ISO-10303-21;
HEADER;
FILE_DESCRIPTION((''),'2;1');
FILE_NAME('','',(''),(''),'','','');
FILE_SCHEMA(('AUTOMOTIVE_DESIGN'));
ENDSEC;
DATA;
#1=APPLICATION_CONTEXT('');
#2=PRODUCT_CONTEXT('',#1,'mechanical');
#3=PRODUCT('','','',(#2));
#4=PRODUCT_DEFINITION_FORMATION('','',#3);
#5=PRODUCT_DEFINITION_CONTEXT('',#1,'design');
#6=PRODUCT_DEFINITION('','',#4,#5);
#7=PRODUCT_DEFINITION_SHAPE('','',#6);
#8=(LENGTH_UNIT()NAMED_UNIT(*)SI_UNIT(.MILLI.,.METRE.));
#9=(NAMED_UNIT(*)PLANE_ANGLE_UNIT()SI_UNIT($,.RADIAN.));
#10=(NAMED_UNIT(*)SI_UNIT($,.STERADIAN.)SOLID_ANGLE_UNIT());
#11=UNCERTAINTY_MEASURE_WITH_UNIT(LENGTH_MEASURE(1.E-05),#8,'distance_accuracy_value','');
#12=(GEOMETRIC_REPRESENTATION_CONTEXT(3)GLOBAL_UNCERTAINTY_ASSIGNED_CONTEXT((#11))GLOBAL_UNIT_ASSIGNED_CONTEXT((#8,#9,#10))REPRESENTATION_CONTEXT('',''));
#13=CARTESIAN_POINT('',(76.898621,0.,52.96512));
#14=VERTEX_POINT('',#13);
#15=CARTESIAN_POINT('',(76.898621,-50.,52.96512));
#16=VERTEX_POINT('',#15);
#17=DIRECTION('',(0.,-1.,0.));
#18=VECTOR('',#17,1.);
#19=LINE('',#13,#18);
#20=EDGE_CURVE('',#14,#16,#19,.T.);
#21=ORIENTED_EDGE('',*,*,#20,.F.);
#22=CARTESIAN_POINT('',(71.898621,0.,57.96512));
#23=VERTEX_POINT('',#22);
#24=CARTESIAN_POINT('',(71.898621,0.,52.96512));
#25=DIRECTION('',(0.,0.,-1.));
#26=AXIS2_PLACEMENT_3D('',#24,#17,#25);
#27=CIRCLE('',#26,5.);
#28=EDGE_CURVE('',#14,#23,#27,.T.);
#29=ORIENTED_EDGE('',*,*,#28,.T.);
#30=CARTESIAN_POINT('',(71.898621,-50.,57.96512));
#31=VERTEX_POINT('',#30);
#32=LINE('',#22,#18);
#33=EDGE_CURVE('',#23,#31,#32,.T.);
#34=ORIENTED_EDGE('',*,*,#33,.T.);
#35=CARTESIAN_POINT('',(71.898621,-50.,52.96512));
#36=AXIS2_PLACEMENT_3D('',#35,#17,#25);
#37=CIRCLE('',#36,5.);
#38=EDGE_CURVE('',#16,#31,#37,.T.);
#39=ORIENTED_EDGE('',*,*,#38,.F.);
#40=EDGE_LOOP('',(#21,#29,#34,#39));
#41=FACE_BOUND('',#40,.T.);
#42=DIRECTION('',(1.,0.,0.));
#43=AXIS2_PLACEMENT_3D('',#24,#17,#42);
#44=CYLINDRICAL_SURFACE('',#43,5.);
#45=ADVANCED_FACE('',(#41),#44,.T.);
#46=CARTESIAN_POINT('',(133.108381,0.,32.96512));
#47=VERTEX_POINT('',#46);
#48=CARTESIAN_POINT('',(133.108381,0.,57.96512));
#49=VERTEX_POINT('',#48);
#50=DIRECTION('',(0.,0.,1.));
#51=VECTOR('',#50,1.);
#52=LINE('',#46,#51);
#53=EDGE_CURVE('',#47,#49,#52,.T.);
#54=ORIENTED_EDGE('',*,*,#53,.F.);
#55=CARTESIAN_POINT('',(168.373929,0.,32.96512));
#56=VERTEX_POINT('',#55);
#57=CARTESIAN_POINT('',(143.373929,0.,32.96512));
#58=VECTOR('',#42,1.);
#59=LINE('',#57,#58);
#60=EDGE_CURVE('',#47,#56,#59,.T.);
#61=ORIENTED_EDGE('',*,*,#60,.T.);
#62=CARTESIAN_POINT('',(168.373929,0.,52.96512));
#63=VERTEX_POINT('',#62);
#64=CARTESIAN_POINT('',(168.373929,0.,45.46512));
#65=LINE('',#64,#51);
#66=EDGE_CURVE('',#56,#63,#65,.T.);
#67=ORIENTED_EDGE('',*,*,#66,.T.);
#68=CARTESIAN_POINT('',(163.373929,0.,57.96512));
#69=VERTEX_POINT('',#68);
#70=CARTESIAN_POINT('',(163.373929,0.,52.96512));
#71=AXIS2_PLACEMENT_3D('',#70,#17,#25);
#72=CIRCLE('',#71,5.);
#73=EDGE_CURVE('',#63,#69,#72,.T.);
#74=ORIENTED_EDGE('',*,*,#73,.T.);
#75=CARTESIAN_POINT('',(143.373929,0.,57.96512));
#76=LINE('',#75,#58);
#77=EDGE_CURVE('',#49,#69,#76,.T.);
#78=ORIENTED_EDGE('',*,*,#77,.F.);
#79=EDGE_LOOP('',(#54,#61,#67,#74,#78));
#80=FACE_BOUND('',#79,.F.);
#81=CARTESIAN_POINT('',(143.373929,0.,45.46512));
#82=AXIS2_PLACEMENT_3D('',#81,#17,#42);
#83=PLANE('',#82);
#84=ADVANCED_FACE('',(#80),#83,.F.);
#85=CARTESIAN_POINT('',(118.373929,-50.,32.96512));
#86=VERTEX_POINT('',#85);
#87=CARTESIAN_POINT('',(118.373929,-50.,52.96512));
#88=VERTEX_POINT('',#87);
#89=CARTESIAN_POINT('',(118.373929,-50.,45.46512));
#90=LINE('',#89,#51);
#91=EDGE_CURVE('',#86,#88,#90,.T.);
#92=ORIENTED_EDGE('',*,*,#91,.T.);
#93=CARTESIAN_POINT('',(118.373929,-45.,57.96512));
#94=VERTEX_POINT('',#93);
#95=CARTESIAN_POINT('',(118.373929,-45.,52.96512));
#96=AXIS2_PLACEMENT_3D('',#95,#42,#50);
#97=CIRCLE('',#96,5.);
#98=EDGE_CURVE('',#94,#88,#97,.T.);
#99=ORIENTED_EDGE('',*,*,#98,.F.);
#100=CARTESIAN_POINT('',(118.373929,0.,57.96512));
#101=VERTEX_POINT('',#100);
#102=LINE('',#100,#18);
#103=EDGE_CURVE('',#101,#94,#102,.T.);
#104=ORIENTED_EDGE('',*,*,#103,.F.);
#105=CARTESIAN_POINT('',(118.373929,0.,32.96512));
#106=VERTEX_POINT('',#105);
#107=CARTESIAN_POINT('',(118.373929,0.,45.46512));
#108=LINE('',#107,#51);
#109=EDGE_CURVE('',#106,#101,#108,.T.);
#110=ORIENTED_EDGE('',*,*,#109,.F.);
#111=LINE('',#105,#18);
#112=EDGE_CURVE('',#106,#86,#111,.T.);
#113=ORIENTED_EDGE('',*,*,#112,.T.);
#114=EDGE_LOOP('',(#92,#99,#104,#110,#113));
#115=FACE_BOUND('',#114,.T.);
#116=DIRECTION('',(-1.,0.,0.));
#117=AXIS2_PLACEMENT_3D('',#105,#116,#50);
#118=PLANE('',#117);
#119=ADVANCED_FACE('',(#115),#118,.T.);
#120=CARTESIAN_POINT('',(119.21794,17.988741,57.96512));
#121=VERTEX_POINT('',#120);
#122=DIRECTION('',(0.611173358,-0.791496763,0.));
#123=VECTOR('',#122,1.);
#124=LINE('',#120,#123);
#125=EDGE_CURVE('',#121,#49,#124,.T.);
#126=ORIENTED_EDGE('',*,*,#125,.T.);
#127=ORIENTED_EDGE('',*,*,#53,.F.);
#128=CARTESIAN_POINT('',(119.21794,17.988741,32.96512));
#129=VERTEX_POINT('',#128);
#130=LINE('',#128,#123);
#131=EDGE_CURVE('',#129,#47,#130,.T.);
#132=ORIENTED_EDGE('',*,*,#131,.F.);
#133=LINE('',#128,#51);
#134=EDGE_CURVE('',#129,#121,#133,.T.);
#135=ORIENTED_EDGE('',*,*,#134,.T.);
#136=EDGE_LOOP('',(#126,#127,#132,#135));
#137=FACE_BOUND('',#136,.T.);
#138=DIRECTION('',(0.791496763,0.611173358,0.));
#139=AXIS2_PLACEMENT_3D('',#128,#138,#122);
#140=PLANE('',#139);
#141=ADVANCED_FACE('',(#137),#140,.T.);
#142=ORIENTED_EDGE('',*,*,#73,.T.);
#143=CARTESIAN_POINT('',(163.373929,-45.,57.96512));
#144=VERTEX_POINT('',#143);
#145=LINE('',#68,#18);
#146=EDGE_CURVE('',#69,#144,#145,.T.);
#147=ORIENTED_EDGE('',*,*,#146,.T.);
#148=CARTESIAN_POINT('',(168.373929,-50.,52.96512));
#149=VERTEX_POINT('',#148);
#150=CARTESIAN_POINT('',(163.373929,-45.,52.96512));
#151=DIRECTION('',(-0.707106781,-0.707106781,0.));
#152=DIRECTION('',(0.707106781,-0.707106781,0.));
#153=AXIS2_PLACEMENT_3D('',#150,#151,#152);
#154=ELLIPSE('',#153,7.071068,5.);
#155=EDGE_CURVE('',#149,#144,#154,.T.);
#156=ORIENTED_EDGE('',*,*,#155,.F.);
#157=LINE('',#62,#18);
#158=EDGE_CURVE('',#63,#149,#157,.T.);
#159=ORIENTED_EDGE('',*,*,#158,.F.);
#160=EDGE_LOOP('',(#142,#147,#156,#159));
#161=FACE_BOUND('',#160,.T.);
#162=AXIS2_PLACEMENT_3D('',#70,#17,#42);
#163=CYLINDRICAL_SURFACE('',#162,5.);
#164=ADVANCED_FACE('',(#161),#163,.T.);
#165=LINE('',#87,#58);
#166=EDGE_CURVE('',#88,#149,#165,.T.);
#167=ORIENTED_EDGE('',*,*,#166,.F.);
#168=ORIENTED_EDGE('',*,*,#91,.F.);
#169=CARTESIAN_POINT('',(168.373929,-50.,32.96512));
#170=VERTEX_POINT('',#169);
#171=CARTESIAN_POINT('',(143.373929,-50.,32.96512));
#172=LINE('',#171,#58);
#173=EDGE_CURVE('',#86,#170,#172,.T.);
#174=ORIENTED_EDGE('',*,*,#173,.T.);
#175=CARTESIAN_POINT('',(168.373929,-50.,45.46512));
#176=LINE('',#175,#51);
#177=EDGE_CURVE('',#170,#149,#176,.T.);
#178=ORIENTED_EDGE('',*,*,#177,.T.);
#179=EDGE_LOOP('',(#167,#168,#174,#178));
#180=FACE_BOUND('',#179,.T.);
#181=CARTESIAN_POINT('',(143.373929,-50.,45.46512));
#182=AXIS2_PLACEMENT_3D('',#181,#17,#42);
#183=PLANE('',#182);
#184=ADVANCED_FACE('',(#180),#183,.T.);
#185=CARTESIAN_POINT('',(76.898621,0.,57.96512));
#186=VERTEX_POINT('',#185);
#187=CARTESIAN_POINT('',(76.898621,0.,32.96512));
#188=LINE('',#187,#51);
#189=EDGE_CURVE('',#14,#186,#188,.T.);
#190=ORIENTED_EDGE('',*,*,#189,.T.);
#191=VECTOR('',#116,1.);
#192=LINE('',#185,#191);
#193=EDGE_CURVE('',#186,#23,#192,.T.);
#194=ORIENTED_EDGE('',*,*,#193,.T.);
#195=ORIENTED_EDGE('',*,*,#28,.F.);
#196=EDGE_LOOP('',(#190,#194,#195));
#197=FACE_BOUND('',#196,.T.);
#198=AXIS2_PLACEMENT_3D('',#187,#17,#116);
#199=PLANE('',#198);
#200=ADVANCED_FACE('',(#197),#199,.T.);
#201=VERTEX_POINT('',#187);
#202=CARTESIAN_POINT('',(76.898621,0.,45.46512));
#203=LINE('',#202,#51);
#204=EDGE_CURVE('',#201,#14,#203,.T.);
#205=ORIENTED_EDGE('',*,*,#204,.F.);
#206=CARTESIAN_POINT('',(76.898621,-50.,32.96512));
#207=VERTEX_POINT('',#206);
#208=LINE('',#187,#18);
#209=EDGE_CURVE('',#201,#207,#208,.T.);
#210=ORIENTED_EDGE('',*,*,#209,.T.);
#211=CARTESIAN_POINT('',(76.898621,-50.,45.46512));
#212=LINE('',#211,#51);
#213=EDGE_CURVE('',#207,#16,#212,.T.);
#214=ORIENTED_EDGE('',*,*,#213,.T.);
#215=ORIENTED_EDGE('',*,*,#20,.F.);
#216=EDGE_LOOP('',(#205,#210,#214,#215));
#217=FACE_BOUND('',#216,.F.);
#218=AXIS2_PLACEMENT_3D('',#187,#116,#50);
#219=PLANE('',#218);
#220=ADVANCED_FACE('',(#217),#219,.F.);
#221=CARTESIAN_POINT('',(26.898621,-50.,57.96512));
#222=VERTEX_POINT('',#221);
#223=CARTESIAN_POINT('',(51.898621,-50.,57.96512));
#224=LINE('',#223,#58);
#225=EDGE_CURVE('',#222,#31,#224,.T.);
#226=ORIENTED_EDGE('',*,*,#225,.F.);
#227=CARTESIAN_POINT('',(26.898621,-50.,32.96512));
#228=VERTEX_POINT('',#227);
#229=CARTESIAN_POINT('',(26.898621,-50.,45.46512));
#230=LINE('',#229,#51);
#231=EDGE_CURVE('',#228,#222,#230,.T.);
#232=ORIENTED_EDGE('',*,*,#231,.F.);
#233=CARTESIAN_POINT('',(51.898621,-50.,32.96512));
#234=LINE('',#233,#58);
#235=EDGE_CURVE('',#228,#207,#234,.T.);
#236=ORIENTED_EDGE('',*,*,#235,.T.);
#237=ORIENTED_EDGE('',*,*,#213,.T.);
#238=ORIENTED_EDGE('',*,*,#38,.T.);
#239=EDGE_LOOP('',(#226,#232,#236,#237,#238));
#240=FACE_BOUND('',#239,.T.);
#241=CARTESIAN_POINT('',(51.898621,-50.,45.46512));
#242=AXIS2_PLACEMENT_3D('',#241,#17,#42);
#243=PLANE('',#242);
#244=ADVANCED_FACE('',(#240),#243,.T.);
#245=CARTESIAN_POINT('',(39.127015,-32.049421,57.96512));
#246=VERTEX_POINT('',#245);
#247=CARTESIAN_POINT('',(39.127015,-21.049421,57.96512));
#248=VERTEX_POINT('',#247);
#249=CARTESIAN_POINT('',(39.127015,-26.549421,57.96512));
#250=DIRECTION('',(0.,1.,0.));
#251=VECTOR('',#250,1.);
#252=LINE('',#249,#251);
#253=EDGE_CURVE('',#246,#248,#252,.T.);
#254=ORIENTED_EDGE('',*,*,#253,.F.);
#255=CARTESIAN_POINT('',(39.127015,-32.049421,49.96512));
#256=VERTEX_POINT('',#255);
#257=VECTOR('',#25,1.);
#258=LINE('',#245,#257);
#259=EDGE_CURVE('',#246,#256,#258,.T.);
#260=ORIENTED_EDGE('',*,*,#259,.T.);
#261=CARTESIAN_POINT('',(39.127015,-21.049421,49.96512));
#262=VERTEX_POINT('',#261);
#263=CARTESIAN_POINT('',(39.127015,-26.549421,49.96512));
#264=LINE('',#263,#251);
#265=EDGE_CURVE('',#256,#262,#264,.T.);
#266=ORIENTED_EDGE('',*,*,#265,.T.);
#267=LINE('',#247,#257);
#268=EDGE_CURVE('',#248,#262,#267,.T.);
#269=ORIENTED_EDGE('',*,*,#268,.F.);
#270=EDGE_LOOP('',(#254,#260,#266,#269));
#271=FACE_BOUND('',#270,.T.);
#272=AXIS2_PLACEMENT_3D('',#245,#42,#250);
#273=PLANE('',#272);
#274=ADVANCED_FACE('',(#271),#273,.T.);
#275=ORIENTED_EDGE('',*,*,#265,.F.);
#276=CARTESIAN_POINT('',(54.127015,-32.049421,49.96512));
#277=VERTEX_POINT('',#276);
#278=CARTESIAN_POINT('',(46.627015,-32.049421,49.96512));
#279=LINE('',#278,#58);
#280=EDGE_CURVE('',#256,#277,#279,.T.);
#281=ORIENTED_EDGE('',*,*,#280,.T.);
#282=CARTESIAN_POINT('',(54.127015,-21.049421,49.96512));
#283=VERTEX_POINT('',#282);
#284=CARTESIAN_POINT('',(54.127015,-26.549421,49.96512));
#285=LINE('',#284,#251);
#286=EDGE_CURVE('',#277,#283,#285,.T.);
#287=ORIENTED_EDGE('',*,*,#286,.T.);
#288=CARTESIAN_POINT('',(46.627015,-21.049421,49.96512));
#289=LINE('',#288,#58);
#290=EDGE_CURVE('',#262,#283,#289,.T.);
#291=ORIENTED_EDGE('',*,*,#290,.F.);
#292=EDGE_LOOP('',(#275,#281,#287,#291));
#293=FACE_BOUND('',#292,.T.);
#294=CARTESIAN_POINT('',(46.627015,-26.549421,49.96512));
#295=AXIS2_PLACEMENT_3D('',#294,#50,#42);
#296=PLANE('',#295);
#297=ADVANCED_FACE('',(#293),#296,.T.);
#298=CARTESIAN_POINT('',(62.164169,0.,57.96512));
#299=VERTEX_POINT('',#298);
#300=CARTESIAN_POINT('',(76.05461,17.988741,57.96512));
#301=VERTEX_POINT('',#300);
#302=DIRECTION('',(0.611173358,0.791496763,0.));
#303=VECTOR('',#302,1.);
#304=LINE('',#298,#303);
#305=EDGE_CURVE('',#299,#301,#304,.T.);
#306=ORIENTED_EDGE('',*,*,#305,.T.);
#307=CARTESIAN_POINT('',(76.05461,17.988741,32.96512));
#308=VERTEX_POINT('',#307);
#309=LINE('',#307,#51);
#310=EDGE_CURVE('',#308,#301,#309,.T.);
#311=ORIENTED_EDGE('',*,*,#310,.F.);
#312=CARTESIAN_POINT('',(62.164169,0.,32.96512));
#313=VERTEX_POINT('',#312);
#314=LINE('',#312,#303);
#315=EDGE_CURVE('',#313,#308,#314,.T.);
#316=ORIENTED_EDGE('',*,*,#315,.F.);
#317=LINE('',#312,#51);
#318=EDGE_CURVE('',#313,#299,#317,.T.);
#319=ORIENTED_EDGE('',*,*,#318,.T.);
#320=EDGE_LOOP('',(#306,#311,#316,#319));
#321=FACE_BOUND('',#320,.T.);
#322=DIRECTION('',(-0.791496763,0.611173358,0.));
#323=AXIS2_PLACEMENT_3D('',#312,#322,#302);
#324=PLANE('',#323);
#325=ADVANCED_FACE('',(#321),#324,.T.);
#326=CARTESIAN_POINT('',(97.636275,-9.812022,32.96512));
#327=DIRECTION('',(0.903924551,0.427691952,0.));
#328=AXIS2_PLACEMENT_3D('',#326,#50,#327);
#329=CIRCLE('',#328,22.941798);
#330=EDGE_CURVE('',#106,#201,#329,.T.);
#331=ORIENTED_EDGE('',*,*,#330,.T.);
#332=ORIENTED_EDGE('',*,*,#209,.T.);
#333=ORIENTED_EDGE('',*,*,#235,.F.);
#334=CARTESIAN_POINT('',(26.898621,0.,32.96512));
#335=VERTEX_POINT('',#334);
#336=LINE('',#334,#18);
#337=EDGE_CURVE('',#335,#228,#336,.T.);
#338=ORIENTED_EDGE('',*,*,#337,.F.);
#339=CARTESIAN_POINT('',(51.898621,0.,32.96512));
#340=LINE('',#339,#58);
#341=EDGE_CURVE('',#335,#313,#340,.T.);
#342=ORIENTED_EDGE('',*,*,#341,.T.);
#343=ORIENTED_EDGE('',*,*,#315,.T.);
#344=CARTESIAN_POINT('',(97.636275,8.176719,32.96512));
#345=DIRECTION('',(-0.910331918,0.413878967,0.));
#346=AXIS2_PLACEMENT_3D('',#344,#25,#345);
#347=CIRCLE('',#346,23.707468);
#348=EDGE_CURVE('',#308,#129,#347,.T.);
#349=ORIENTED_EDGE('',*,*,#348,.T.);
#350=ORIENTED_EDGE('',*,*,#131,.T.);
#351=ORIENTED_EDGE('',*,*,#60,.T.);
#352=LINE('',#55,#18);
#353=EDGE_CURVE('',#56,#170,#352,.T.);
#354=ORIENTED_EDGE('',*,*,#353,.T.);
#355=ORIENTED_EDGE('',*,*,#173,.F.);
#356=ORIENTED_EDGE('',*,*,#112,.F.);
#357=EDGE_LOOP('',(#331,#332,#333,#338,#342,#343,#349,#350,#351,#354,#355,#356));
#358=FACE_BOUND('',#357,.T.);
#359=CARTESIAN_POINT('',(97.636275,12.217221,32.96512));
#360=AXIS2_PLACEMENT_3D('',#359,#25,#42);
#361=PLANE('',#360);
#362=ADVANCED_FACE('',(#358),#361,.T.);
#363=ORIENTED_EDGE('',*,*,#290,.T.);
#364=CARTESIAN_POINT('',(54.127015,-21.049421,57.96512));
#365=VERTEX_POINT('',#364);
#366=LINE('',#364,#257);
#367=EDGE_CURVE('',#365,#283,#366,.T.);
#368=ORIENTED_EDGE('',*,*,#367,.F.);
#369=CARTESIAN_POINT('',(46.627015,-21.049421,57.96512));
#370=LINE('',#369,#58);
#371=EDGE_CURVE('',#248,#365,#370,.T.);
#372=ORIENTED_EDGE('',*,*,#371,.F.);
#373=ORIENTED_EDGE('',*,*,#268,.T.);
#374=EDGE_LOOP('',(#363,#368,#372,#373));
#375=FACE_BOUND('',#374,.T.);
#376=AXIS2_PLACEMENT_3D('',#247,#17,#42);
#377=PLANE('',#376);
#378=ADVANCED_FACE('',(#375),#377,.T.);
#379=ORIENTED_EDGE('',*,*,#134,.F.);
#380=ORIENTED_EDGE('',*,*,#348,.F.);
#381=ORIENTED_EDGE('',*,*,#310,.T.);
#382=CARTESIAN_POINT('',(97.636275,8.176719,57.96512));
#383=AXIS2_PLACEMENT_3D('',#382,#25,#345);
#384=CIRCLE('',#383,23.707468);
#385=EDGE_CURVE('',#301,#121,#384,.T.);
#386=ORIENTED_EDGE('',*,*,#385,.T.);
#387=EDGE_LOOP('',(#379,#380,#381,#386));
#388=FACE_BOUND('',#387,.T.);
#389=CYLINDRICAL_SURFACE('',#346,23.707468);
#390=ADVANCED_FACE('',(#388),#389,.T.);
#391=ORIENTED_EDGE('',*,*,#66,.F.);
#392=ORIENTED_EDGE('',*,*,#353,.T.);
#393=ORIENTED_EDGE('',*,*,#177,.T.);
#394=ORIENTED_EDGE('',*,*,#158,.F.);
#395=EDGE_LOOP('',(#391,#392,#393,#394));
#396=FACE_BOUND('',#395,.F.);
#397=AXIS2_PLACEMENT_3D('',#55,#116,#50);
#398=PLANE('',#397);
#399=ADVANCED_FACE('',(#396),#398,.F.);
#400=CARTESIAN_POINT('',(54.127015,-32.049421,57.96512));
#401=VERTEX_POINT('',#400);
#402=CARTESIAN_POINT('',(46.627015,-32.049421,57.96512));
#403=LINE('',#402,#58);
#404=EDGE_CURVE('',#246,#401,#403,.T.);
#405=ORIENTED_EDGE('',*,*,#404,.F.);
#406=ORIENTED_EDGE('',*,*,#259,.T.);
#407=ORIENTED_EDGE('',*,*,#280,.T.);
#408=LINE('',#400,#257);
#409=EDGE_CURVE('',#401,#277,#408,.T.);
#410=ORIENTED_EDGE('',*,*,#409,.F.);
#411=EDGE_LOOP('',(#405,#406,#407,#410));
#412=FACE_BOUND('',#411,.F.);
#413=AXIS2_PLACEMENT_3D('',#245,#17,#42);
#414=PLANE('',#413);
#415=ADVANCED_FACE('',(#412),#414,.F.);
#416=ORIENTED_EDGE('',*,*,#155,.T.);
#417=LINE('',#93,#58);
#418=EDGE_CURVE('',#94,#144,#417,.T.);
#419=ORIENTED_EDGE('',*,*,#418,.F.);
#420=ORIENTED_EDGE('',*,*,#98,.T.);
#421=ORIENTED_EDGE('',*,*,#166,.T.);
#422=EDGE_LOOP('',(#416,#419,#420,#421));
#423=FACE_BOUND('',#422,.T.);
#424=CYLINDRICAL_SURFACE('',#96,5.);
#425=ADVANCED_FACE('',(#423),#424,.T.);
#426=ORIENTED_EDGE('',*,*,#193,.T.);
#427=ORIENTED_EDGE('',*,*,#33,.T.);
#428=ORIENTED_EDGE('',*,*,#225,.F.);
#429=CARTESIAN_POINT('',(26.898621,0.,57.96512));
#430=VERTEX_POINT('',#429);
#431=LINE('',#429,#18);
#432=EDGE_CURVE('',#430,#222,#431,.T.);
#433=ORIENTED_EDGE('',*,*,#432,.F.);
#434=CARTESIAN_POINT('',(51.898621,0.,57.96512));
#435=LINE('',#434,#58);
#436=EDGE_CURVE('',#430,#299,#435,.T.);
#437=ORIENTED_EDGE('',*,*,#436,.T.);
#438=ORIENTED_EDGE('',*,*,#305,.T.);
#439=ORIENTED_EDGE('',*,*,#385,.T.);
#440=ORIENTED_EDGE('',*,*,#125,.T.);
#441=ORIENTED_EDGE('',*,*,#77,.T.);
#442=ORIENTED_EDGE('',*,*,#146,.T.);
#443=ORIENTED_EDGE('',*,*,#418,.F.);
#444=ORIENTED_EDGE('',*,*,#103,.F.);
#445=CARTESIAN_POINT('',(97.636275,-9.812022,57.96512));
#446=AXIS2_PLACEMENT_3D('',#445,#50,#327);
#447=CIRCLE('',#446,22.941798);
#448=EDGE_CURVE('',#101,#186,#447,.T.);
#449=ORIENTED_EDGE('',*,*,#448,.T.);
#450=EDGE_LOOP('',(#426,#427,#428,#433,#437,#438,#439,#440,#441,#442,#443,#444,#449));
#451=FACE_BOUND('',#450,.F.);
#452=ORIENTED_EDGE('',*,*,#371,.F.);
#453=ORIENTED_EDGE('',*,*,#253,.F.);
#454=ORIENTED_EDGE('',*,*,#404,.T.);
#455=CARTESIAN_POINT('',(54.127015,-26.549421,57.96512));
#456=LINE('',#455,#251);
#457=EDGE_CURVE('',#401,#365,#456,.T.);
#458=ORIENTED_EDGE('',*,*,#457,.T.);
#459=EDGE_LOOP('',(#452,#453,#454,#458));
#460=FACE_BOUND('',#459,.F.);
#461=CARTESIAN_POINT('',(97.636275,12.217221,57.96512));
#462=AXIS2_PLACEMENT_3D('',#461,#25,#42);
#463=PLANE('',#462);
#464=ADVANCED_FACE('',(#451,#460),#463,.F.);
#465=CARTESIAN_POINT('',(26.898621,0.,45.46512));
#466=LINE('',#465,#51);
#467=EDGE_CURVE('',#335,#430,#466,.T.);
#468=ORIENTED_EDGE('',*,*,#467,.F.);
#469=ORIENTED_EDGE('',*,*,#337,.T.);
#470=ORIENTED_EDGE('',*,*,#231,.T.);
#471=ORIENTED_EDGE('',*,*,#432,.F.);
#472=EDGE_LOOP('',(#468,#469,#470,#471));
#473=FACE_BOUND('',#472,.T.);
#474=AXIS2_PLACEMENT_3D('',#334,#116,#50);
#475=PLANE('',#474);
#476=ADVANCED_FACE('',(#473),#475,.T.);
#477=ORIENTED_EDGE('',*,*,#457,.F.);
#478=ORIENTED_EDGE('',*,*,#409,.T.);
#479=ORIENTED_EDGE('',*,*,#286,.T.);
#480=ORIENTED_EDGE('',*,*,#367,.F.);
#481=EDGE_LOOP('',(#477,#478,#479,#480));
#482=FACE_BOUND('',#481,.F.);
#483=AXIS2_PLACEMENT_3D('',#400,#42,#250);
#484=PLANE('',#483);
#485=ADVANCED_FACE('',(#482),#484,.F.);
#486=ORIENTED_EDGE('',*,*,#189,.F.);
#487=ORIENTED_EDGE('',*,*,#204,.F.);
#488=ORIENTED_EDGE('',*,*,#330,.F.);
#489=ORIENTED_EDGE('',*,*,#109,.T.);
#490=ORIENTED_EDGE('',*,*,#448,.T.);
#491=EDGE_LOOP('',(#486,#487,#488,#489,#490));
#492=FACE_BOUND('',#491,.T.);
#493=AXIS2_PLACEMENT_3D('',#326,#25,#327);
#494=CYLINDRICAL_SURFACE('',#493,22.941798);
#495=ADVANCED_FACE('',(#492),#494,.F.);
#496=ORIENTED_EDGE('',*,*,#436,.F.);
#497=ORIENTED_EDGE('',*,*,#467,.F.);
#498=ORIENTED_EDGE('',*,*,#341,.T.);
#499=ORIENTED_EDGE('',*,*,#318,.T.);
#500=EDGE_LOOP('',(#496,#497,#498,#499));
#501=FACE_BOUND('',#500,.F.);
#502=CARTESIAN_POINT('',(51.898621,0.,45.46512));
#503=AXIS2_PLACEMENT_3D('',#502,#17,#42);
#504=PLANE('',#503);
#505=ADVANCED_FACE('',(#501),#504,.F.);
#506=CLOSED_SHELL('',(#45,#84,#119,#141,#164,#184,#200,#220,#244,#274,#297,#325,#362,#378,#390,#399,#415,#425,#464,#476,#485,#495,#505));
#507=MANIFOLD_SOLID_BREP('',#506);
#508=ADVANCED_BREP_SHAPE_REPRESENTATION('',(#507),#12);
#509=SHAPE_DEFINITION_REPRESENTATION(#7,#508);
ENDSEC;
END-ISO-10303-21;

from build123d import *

# Parameters (mm, degrees)
F0_W     = 50
F0_H     = 25
F1_DEPTH = 50
F2_R     = 5
F2_2_R   = 5
F3_W     = 15
F3_H     = 11
F3_R     = 5
F4_DEPTH = 8
F7_DEPTH = 25


with BuildPart() as f1:
    # F0 (on Front) → F1 (new body)
    with BuildSketch(Plane.XZ):
        with Locations((51.8986206502, 45.4651199281)):
            Rectangle(F0_W, F0_H)
    extrude(amount=F1_DEPTH)

    # F2
    f2_edges = [f1.edges().sort_by_distance(p)[0] for p in [
        (76.898621, -25, 57.96512),
    ]]
    fillet(f2_edges, radius=F2_R)

    # F3 (on face) → F4 (cut)
    with BuildSketch(Plane.XY.offset(57.9651199281)):
        with Locations((46.6270151734, -26.549421221)):
            Rectangle(F3_W, F3_H)
        with Locations((140.8739293367, -25.6193820387)):
            Circle(F3_R)
    extrude(amount=-F4_DEPTH, mode=Mode.SUBTRACT)



with BuildPart() as f1b:
    # F0 (on Front) → F1, piece 2 (new body)
    with BuildSketch(Plane.XZ):
        with Locations((143.3739293367, 45.4651199281)):
            Rectangle(F0_W, F0_H)
    extrude(amount=F1_DEPTH)

    # F2#2
    f2_2_edges = [f1b.edges().sort_by_distance(p)[0] for p in [
        (168.373929, -25, 57.96512),
        (143.373929, -50, 57.96512),
    ]]
    fillet(f2_2_edges, radius=F2_2_R)


with BuildPart() as f1_1:
    add(f1.part)

    add(f1b.part)  # F7 merges F1b
    # F6 (on offset) → F7 (join)
    with BuildSketch(Plane(origin=(0, 0, 32.9651199281), x_dir=(1, 0, 0), z_dir=(0, 0, -1))):
        with BuildLine():
            ThreePointArc((118.3739293367, 0), (97.6362749934, -13.1297755552), (76.8986206502, 0))
            Line((76.8986206502, 0), (62.1641688049, 0))
            Line((62.1641688049, 0), (76.054610312, -17.9887413979))
            ThreePointArc((76.054610312, -17.9887413979), (97.6362749934, -31.8841869417), (119.2179396749, -17.9887413979))
            Line((119.2179396749, -17.9887413979), (133.108381182, 0))
            Line((133.108381182, 0), (118.3739293367, 0))
        make_face()
    extrude(amount=-F7_DEPTH)


solid = f1_1.part
